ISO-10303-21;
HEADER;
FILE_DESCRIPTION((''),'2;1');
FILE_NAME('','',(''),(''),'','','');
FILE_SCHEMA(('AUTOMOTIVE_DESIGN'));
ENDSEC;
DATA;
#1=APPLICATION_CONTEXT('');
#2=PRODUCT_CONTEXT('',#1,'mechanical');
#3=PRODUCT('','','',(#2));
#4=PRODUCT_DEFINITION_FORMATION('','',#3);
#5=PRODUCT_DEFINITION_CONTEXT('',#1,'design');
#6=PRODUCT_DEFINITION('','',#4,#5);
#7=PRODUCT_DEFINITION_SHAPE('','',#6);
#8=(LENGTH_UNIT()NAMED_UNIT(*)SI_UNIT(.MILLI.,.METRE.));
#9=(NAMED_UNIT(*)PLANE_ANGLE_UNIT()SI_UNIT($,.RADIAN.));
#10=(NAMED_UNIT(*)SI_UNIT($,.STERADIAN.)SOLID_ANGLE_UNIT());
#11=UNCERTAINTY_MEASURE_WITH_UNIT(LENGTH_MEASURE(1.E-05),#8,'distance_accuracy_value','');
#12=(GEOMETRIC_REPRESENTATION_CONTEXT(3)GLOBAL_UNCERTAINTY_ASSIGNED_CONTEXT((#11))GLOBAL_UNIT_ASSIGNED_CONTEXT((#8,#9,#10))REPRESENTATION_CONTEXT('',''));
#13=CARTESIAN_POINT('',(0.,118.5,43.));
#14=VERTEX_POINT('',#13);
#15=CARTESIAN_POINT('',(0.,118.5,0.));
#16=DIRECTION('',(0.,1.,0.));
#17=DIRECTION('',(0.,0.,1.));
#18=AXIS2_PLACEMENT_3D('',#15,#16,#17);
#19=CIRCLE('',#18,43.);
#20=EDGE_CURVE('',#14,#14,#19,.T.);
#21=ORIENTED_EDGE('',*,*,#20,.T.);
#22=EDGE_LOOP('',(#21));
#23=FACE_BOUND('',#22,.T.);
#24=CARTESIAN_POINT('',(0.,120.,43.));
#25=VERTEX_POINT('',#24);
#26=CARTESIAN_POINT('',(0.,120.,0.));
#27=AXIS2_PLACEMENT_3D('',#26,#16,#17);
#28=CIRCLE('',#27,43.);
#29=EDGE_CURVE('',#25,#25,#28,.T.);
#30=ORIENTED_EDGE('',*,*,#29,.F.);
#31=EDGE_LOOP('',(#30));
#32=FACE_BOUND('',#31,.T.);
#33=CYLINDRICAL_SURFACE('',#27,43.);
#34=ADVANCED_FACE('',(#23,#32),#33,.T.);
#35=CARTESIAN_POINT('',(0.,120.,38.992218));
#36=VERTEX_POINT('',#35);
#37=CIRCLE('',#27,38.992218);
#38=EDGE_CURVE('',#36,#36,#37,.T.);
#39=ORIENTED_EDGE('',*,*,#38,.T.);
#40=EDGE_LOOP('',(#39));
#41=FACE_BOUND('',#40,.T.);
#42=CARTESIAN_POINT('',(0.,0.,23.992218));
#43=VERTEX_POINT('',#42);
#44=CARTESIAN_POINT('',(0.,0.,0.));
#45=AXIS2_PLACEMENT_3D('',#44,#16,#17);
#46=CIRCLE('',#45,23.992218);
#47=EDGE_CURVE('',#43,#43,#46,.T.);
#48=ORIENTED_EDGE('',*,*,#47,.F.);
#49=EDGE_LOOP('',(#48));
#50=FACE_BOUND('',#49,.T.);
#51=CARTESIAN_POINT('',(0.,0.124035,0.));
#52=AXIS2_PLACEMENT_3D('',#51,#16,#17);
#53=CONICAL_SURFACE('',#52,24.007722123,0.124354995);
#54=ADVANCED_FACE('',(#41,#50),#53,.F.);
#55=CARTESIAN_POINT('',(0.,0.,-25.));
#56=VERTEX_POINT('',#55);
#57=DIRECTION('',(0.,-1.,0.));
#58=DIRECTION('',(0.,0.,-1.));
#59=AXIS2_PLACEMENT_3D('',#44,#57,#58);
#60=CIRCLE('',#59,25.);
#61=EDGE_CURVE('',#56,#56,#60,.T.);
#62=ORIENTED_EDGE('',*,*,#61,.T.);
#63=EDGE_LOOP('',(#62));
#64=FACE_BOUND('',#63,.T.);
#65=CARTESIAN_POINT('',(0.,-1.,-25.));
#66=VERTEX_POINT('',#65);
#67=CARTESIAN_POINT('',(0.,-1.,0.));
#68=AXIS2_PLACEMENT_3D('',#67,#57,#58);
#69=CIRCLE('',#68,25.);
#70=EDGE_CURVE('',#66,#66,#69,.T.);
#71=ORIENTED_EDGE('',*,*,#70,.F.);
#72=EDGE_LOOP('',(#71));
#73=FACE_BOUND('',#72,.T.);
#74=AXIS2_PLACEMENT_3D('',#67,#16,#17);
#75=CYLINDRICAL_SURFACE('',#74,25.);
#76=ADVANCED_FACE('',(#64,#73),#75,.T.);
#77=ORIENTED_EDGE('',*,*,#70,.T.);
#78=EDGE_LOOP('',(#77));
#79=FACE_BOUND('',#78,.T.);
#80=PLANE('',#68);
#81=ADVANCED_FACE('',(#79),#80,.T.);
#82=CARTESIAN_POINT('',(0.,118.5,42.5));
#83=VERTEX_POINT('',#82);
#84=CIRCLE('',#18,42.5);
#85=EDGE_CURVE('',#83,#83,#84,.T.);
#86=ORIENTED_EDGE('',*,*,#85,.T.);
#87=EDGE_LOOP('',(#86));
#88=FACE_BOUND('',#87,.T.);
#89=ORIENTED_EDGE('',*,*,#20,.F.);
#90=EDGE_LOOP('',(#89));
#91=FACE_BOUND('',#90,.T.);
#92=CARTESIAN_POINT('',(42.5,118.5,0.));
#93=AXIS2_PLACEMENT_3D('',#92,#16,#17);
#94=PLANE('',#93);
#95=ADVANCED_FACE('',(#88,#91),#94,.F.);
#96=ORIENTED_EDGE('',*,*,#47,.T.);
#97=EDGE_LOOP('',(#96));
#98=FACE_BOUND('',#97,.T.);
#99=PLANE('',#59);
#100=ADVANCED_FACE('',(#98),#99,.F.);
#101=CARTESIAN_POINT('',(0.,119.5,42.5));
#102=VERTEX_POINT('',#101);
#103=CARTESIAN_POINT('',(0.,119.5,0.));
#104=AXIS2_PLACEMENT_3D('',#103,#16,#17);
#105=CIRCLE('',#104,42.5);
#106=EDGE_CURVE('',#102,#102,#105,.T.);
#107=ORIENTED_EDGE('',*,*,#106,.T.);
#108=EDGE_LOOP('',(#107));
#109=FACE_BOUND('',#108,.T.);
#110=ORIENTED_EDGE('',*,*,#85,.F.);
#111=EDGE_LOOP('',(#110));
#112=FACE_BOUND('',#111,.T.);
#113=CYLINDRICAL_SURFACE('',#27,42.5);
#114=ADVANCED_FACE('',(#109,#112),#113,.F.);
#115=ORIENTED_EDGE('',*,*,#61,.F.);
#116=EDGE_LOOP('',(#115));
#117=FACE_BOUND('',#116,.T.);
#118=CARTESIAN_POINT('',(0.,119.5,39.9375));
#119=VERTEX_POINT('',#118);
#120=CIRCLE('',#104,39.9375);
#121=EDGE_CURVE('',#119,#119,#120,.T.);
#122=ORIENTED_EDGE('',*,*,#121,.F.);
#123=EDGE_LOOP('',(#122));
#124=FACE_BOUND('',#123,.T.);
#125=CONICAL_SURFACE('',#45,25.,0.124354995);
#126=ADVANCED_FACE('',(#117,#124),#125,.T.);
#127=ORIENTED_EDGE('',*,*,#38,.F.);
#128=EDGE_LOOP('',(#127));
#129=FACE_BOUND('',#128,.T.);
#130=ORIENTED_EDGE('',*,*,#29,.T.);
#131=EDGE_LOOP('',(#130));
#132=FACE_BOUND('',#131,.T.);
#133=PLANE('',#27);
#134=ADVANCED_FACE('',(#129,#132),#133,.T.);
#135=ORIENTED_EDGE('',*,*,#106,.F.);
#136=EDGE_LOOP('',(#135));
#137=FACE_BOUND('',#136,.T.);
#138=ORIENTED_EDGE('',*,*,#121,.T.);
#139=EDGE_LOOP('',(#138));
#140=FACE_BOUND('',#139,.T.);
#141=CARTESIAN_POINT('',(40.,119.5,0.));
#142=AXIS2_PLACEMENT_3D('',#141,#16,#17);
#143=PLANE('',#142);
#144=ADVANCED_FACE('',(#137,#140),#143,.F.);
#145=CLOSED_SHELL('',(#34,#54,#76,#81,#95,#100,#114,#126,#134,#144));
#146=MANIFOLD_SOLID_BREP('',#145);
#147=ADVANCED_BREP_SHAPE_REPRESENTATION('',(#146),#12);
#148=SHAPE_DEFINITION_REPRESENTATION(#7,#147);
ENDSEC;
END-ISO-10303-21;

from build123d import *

# Parameters (mm, degrees)
SKETCH5_R           = 25
BOSS_EXTRUDE1_DEPTH = 1


# Read off the part's stored shape, not the designer's step: Loft-Thin1
with BuildPart() as part:
    # Loft-Thin1 outline → Loft-Thin1 (revolve)
    with BuildSketch(Plane.XY):
        Polygon((38.992217781, 120), (23.992217781, 0), (25, 0), (40, 120), align=None)
    revolve(axis=Axis((0, 0, 0), (0, 1, 0)))

    # Sketch5 → Boss-Extrude1 (add)
    with BuildSketch(Plane.XZ):
        with Locations(Location((0, 0, 0), (0, 0, 270))):
            Circle(SKETCH5_R)
    extrude(amount=BOSS_EXTRUDE1_DEPTH)

    # Sketch6 → Revolve1 (revolve)
    with BuildSketch(Plane.XY, mode=Mode.PRIVATE) as revolve1_sk:
        Polygon((40, 120), (43, 120), (43, 118.5), (42.5, 118.5), (42.5, 119.5), (40, 119.5), (39.9375, 119.5), align=None)
    revolve(revolve1_sk.sketch.rotate(Axis((0, 120, 0), (0, -1, 0)), 90), axis=Axis((0, 120, 0), (0, -1, 0)))


solid = part.part
